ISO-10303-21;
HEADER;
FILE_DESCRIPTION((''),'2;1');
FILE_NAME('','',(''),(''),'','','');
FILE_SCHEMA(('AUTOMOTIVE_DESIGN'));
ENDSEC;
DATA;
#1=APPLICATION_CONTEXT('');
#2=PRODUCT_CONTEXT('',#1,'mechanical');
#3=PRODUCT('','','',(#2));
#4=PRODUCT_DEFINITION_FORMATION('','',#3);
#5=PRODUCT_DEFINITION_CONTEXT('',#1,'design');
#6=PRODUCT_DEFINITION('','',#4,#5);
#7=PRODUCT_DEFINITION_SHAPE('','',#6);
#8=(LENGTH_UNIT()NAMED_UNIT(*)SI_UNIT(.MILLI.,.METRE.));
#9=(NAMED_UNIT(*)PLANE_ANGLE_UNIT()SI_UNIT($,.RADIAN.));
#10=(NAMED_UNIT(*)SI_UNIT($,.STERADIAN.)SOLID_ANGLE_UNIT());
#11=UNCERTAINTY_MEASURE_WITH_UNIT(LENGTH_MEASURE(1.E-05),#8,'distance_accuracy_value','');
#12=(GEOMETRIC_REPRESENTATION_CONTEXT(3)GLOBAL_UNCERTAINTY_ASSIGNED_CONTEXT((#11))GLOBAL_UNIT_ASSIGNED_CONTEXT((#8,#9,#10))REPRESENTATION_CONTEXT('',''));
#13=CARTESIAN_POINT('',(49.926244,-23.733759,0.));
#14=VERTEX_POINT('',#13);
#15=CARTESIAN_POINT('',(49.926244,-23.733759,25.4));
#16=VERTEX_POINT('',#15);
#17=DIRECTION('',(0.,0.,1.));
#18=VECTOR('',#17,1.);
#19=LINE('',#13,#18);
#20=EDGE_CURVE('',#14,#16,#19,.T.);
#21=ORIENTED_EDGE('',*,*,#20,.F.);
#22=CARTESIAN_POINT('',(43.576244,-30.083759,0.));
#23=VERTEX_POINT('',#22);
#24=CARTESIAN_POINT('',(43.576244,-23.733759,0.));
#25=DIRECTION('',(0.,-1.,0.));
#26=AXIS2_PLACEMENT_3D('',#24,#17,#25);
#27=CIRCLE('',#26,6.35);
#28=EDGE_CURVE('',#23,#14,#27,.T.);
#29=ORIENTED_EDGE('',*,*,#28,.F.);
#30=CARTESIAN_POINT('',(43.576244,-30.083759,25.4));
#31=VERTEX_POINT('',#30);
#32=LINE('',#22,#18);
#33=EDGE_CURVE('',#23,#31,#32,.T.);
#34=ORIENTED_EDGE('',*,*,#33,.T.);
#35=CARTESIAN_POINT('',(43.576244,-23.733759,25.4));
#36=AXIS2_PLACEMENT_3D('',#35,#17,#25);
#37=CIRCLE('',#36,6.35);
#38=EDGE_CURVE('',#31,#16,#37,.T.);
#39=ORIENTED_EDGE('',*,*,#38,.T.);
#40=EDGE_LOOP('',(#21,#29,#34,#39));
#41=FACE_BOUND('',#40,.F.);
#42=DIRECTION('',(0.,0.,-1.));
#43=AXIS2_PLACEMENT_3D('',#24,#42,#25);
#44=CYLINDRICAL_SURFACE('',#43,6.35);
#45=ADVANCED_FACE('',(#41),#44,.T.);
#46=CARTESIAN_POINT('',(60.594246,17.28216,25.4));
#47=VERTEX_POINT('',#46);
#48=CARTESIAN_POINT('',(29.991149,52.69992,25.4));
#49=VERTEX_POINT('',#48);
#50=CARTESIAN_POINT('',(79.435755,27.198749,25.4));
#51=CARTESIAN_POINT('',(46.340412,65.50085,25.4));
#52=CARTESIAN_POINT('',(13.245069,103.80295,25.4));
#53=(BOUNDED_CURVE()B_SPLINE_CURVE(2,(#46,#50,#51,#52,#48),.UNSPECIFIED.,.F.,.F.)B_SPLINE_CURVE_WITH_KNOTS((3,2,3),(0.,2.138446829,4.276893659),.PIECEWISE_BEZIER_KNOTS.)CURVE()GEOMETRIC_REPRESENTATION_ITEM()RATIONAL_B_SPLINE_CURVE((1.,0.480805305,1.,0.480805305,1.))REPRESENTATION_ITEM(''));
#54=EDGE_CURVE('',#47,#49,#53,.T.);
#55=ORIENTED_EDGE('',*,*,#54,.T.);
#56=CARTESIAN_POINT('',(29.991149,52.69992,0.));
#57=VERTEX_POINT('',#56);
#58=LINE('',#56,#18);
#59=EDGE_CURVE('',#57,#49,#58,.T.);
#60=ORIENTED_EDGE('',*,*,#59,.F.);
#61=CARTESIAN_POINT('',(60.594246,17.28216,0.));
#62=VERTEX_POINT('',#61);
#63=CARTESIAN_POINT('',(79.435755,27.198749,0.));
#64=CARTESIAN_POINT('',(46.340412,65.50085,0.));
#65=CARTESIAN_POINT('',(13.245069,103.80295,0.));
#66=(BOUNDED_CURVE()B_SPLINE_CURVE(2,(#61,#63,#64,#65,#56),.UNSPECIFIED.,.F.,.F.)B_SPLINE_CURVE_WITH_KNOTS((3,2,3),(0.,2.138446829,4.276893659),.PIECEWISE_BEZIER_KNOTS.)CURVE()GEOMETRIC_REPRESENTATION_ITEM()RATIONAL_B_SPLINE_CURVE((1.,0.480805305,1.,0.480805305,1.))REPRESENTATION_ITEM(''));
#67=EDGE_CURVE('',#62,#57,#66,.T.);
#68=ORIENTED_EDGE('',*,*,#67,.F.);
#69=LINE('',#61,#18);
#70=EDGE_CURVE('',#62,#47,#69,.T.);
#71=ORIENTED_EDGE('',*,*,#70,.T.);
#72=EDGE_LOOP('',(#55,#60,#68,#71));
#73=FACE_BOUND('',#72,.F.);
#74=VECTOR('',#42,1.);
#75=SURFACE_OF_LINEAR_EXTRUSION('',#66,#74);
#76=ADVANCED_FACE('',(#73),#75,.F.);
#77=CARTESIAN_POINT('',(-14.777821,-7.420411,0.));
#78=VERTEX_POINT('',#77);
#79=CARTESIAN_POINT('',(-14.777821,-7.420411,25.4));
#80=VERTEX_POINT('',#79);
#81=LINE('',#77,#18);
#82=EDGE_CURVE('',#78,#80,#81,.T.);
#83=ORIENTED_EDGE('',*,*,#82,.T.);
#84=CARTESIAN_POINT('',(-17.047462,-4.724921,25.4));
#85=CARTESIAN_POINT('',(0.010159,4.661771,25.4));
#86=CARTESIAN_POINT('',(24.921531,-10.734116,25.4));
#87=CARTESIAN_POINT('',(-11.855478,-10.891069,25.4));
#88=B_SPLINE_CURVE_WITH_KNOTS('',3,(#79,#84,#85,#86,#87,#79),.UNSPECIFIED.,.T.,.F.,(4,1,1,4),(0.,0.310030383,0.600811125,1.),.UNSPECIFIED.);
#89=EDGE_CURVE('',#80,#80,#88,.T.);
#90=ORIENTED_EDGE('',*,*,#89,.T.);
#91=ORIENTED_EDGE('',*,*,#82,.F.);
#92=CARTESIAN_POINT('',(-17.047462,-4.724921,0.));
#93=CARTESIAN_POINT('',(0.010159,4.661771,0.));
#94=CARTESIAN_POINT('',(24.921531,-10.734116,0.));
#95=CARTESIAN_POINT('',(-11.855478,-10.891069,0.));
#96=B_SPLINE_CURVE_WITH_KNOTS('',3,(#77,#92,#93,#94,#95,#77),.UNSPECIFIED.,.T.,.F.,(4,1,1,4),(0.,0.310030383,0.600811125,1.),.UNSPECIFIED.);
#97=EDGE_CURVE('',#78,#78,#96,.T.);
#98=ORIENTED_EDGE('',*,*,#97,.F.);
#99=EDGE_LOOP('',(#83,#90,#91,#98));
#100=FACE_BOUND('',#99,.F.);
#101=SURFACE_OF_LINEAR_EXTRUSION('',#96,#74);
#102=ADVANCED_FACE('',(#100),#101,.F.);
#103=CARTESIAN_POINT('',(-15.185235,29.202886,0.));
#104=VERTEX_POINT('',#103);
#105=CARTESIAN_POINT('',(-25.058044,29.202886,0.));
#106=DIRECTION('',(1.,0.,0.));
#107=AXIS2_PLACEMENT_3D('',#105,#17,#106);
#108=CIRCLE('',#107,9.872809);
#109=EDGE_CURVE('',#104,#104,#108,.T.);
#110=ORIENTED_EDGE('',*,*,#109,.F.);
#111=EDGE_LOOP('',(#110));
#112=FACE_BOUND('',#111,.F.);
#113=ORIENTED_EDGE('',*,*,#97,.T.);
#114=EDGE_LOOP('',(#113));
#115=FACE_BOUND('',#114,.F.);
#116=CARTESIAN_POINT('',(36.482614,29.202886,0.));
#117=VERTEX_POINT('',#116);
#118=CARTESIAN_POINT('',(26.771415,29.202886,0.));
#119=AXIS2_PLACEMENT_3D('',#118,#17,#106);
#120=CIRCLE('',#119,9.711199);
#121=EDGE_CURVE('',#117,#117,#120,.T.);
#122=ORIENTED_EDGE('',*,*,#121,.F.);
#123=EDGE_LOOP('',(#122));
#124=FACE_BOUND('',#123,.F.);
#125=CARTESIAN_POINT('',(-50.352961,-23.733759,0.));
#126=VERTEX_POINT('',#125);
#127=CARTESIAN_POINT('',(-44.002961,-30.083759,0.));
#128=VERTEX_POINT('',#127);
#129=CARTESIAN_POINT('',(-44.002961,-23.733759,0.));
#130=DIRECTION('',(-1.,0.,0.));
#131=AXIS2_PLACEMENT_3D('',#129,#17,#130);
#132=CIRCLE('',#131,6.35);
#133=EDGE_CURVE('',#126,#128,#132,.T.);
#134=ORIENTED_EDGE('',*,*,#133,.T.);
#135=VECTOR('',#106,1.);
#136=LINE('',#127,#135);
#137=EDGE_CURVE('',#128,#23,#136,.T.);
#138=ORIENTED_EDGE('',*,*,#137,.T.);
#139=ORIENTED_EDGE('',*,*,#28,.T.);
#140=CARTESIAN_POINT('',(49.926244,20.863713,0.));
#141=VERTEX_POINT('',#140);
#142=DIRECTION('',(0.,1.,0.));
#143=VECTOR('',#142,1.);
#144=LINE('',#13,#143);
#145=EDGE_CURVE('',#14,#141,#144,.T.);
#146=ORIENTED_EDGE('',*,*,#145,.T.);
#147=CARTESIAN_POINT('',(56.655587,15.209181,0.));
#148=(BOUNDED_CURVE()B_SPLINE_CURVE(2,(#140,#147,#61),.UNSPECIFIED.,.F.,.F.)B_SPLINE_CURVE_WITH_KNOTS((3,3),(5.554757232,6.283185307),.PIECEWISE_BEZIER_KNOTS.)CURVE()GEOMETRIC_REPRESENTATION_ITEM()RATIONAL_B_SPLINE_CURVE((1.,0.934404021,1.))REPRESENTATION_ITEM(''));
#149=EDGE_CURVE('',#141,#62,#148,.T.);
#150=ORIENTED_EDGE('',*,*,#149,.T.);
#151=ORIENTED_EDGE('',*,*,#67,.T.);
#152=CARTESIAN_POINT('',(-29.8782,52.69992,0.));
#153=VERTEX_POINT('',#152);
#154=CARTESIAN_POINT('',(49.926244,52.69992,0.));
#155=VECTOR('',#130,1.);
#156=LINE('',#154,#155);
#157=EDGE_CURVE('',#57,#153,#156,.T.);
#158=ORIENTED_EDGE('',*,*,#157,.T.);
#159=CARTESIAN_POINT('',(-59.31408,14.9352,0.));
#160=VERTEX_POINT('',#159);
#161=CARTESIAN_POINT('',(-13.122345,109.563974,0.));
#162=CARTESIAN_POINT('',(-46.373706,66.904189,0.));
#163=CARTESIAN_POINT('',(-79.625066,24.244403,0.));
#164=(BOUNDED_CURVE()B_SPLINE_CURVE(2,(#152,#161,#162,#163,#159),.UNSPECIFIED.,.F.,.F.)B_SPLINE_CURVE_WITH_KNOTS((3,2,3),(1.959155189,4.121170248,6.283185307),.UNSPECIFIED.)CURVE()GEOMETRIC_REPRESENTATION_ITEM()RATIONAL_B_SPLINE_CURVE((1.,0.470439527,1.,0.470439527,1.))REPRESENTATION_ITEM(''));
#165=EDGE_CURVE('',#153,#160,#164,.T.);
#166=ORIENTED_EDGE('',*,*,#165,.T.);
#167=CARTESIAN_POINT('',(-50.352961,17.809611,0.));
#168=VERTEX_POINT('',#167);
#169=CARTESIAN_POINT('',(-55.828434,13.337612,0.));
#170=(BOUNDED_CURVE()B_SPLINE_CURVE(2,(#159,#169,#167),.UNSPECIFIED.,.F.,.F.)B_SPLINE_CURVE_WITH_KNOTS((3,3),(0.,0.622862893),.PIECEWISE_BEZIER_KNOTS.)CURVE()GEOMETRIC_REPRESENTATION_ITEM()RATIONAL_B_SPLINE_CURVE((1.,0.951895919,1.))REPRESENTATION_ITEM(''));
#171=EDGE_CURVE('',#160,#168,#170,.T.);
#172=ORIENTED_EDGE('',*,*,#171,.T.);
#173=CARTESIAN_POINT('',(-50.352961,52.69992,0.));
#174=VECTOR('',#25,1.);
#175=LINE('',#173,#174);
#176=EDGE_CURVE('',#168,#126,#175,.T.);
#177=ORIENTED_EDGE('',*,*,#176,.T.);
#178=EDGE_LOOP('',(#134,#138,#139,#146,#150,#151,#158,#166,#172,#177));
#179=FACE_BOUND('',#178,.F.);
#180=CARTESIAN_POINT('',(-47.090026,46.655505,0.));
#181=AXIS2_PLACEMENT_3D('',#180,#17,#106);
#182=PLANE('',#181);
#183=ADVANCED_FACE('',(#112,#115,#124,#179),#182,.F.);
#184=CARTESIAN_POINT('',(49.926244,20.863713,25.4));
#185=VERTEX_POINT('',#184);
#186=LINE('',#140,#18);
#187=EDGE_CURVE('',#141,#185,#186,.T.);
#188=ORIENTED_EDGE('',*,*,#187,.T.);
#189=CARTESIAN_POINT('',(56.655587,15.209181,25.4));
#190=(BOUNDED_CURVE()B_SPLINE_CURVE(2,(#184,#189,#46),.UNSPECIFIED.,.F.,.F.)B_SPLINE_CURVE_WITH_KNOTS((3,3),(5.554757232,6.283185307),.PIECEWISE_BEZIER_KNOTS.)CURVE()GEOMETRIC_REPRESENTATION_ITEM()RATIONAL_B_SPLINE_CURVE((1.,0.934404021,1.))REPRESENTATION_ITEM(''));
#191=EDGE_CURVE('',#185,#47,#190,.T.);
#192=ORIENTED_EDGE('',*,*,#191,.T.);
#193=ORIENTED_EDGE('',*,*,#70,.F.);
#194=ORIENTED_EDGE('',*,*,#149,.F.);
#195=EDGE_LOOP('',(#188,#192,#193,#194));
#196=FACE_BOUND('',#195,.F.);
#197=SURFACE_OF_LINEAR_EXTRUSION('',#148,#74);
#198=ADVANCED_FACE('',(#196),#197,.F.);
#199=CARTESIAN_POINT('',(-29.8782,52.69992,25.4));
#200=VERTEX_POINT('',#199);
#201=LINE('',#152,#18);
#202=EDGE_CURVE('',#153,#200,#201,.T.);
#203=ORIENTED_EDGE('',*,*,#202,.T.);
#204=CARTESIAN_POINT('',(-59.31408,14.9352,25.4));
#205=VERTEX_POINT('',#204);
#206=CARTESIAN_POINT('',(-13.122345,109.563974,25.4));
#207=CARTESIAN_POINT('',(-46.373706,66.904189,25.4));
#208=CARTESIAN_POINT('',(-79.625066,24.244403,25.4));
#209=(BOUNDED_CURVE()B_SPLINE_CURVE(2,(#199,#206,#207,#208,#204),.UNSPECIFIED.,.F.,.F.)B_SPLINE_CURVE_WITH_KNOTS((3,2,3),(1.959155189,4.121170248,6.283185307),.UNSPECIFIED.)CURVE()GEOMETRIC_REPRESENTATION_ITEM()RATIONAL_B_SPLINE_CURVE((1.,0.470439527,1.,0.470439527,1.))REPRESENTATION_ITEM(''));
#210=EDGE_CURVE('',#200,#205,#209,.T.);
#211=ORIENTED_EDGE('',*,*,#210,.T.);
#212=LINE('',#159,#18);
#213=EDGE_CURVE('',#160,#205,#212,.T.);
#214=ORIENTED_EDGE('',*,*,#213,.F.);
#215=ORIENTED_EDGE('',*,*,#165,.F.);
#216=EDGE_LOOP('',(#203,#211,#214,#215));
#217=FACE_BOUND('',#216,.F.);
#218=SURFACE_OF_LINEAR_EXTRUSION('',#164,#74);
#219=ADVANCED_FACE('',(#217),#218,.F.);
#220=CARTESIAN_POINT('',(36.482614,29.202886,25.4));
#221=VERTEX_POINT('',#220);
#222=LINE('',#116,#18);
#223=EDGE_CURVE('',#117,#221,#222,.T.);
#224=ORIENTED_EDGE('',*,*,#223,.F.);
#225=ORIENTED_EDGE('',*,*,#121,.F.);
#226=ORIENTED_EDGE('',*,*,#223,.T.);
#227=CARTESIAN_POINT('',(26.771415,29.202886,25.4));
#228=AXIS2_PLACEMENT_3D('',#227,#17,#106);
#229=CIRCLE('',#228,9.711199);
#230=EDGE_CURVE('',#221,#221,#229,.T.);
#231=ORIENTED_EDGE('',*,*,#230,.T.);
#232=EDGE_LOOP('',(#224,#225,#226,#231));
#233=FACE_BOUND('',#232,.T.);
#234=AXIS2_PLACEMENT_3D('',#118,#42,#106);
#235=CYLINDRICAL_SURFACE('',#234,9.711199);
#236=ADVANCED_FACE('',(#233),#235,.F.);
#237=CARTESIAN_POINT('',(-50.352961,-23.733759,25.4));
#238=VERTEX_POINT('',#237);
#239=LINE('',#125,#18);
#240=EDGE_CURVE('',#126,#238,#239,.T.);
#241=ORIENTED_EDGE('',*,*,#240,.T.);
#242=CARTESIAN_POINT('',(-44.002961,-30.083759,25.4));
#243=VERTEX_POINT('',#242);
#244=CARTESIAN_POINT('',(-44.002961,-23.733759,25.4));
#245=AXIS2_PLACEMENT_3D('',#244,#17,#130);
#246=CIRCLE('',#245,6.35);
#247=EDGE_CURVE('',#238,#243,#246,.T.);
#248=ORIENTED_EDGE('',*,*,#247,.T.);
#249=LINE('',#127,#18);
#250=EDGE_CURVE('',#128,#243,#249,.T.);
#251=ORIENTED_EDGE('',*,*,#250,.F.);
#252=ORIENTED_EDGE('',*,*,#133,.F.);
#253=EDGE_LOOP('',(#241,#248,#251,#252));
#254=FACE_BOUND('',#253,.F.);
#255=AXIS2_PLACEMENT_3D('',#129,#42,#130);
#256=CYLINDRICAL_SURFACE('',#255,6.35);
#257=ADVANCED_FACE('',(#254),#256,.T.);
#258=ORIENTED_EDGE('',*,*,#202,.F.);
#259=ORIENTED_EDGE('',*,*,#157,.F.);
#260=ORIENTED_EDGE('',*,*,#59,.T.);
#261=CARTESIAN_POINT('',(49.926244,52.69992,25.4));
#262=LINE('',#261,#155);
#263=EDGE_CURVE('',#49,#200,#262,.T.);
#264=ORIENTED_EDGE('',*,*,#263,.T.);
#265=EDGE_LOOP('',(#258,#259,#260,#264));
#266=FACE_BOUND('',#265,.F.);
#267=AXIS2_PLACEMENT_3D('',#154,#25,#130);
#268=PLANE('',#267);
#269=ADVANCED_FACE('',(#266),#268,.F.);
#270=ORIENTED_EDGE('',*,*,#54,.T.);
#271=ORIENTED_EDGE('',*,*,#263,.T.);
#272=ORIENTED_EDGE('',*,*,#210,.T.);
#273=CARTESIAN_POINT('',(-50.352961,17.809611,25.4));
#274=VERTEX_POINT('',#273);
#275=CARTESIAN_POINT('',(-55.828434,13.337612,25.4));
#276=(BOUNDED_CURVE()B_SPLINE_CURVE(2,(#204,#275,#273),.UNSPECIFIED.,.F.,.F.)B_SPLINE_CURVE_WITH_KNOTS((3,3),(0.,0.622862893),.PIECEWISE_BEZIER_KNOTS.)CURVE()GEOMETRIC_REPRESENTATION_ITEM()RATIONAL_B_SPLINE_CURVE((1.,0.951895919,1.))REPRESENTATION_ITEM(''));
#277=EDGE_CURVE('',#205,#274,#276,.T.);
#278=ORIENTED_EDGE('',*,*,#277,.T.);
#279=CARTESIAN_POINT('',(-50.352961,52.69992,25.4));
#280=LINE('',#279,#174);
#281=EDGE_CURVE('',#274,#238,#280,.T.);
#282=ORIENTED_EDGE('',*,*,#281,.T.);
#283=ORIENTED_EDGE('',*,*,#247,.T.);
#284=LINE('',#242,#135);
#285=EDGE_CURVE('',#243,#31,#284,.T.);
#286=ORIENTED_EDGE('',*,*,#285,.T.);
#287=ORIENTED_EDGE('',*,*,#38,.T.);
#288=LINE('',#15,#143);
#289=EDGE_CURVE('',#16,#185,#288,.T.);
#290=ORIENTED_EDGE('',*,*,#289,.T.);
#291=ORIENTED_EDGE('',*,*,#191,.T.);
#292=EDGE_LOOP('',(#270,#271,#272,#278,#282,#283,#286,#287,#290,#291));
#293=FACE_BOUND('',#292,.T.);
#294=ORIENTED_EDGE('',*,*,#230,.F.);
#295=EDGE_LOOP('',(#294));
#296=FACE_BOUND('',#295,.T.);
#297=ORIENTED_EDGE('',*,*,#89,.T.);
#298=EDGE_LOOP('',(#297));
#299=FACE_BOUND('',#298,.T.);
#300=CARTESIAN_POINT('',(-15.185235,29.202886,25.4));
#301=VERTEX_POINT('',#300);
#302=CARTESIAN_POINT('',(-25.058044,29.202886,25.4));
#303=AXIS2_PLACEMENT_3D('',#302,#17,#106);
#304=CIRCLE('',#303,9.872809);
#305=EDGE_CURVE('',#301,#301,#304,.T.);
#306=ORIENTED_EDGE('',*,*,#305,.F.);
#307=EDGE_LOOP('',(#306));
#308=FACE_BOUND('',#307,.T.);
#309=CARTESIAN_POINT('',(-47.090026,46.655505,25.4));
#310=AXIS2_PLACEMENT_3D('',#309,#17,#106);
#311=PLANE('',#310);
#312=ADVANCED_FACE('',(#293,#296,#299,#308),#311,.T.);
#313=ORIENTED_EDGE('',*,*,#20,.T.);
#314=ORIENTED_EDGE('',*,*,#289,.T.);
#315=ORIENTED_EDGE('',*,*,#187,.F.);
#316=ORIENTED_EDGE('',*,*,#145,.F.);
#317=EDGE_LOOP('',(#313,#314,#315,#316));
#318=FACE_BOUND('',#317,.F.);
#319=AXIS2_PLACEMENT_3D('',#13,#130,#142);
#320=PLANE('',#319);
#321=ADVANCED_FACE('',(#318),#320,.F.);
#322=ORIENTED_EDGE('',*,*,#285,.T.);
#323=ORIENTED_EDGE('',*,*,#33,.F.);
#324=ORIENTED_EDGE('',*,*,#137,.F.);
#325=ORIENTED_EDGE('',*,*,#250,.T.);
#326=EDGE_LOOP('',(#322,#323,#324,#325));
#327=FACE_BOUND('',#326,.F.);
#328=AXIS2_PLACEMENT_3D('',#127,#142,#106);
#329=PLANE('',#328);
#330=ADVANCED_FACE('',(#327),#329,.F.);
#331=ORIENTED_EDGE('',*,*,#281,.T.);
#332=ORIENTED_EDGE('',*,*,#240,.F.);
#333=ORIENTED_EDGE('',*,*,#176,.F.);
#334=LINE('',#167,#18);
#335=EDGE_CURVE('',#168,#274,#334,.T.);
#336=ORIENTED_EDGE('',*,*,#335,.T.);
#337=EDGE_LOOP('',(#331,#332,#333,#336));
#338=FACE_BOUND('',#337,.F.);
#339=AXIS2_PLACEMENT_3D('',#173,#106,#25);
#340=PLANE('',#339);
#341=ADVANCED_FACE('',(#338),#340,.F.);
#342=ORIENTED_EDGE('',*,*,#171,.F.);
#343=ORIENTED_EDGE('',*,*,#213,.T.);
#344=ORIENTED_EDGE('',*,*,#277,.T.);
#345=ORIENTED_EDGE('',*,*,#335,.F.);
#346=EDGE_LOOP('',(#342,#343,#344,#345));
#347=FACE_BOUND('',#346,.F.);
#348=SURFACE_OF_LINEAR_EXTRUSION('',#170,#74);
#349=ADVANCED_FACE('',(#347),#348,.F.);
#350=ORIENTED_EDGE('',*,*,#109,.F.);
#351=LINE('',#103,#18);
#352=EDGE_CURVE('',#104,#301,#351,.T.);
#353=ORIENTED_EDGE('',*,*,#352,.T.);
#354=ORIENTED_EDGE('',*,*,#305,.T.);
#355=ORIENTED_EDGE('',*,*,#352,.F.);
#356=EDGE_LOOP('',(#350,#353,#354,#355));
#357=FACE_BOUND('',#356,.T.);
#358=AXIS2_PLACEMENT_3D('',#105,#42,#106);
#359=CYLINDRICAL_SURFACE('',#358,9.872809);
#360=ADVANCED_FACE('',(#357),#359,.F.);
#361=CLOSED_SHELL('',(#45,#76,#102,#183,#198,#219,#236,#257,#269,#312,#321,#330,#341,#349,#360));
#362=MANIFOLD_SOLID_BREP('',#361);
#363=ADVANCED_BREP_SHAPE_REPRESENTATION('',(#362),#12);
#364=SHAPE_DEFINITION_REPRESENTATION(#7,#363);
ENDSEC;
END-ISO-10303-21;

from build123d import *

# Parameters (mm, degrees)
F0_R     = 9.8728089089
F0_R_2   = 9.7111986955
F2_DEPTH = 25.4
F4_DEPTH = 25.4


# Not quite as in the source:
# - a feature of the source that left no trace in its solid (it failed there, or was rolled back) is left out


with BuildPart() as f2:
    # F0 (on Top) → F2 (new body)
    with BuildSketch(Plane.XY):
        with BuildLine():
            Line((49.9262437224, 52.69991979), (-50.352960825, 52.69991979))
            Line((-50.352960825, 52.69991979), (-50.352960825, -23.7337587565))
            ThreePointArc((-50.352960825, -23.7337587565), (-48.4930888855, -28.2238868171), (-44.002960825, -30.0837587565))
            Line((-44.002960825, -30.0837587565), (43.5762437224, -30.0837587565))
            ThreePointArc((43.5762437224, -30.0837587565), (48.066371783, -28.2238868171), (49.9262437224, -23.7337587565))
            Line((49.9262437224, -23.7337587565), (49.9262437224, 52.69991979))
        make_face()
        with BuildLine():
            add(Edge.make_bspline(
                [(-14.7778214887, -7.4204108678), (-17.0474622449, -4.724920884), (0.0101588176, 4.661771469), (24.9215305111, -10.7341156747), (-11.8554777737, -10.8910694692), (-14.7778214887, -7.4204108678)],
                knots=[0, 0, 0, 0, 0.310030383, 0.6008111246, 1, 1, 1, 1], degree=3))
        make_face(mode=Mode.SUBTRACT)
        with Locations((-25.0580441207, 29.2028859258)):
            Circle(F0_R, mode=Mode.SUBTRACT)
        with Locations((26.771415025, 29.2028859258)):
            Circle(F0_R_2, mode=Mode.SUBTRACT)
    extrude(amount=F2_DEPTH)

    # F1 (on face) → F4 (join)
    with BuildSketch(Plane.XY):
        with BuildLine():
            add(Edge.make_bspline(
                [(-29.878199615, 52.69991979), (-13.1223447166, 109.563974095), (-46.3737055212, 66.904188779), (-79.6250663257, 24.2444034629), (-59.3140795827, 14.9352001026)],
                knots=[1.9591551893, 1.9591551893, 1.9591551893, 4.1211702482, 4.1211702482, 6.2831853072, 6.2831853072, 6.2831853072], degree=2, weights=[1, 0.4704395266, 1, 0.4704395266, 1]))
            add(Edge.make_bspline(
                [(-59.3140795827, 14.9352001026), (-55.828433528, 13.3376121383), (-50.352960825, 17.8096105923)],
                knots=[0, 0, 0, 0.6228628932, 0.6228628932, 0.6228628932], degree=2, weights=[1, 0.9518959192, 1]))
            Line((-50.352960825, 17.8096105923), (-50.352960825, 52.69991979))
            Line((-50.352960825, 52.69991979), (-29.878199615, 52.69991979))
        make_face()
        with BuildLine():
            add(Edge.make_bspline(
                [(60.5942457914, 17.282159999), (79.4357554833, 27.198748734), (46.3404123224, 65.5008495201), (13.2450691614, 103.8029503062), (29.9911485665, 52.69991979)],
                knots=[0, 0, 0, 2.1384468293, 2.1384468293, 4.2768936586, 4.2768936586, 4.2768936586], degree=2, weights=[1, 0.4808053052, 1, 0.4808053052, 1]))
            Line((29.9911485665, 52.69991979), (49.9262437224, 52.69991979))
            Line((49.9262437224, 52.69991979), (49.9262437224, 20.8637133092))
            add(Edge.make_bspline(
                [(49.9262437224, 20.8637133092), (56.655587103, 15.2091807623), (60.5942457914, 17.282159999)],
                knots=[5.5547572315, 5.5547572315, 5.5547572315, 6.2831853072, 6.2831853072, 6.2831853072], degree=2, weights=[1, 0.9344040212, 1]))
        make_face()
    extrude(amount=F4_DEPTH)


solid = f2.part
